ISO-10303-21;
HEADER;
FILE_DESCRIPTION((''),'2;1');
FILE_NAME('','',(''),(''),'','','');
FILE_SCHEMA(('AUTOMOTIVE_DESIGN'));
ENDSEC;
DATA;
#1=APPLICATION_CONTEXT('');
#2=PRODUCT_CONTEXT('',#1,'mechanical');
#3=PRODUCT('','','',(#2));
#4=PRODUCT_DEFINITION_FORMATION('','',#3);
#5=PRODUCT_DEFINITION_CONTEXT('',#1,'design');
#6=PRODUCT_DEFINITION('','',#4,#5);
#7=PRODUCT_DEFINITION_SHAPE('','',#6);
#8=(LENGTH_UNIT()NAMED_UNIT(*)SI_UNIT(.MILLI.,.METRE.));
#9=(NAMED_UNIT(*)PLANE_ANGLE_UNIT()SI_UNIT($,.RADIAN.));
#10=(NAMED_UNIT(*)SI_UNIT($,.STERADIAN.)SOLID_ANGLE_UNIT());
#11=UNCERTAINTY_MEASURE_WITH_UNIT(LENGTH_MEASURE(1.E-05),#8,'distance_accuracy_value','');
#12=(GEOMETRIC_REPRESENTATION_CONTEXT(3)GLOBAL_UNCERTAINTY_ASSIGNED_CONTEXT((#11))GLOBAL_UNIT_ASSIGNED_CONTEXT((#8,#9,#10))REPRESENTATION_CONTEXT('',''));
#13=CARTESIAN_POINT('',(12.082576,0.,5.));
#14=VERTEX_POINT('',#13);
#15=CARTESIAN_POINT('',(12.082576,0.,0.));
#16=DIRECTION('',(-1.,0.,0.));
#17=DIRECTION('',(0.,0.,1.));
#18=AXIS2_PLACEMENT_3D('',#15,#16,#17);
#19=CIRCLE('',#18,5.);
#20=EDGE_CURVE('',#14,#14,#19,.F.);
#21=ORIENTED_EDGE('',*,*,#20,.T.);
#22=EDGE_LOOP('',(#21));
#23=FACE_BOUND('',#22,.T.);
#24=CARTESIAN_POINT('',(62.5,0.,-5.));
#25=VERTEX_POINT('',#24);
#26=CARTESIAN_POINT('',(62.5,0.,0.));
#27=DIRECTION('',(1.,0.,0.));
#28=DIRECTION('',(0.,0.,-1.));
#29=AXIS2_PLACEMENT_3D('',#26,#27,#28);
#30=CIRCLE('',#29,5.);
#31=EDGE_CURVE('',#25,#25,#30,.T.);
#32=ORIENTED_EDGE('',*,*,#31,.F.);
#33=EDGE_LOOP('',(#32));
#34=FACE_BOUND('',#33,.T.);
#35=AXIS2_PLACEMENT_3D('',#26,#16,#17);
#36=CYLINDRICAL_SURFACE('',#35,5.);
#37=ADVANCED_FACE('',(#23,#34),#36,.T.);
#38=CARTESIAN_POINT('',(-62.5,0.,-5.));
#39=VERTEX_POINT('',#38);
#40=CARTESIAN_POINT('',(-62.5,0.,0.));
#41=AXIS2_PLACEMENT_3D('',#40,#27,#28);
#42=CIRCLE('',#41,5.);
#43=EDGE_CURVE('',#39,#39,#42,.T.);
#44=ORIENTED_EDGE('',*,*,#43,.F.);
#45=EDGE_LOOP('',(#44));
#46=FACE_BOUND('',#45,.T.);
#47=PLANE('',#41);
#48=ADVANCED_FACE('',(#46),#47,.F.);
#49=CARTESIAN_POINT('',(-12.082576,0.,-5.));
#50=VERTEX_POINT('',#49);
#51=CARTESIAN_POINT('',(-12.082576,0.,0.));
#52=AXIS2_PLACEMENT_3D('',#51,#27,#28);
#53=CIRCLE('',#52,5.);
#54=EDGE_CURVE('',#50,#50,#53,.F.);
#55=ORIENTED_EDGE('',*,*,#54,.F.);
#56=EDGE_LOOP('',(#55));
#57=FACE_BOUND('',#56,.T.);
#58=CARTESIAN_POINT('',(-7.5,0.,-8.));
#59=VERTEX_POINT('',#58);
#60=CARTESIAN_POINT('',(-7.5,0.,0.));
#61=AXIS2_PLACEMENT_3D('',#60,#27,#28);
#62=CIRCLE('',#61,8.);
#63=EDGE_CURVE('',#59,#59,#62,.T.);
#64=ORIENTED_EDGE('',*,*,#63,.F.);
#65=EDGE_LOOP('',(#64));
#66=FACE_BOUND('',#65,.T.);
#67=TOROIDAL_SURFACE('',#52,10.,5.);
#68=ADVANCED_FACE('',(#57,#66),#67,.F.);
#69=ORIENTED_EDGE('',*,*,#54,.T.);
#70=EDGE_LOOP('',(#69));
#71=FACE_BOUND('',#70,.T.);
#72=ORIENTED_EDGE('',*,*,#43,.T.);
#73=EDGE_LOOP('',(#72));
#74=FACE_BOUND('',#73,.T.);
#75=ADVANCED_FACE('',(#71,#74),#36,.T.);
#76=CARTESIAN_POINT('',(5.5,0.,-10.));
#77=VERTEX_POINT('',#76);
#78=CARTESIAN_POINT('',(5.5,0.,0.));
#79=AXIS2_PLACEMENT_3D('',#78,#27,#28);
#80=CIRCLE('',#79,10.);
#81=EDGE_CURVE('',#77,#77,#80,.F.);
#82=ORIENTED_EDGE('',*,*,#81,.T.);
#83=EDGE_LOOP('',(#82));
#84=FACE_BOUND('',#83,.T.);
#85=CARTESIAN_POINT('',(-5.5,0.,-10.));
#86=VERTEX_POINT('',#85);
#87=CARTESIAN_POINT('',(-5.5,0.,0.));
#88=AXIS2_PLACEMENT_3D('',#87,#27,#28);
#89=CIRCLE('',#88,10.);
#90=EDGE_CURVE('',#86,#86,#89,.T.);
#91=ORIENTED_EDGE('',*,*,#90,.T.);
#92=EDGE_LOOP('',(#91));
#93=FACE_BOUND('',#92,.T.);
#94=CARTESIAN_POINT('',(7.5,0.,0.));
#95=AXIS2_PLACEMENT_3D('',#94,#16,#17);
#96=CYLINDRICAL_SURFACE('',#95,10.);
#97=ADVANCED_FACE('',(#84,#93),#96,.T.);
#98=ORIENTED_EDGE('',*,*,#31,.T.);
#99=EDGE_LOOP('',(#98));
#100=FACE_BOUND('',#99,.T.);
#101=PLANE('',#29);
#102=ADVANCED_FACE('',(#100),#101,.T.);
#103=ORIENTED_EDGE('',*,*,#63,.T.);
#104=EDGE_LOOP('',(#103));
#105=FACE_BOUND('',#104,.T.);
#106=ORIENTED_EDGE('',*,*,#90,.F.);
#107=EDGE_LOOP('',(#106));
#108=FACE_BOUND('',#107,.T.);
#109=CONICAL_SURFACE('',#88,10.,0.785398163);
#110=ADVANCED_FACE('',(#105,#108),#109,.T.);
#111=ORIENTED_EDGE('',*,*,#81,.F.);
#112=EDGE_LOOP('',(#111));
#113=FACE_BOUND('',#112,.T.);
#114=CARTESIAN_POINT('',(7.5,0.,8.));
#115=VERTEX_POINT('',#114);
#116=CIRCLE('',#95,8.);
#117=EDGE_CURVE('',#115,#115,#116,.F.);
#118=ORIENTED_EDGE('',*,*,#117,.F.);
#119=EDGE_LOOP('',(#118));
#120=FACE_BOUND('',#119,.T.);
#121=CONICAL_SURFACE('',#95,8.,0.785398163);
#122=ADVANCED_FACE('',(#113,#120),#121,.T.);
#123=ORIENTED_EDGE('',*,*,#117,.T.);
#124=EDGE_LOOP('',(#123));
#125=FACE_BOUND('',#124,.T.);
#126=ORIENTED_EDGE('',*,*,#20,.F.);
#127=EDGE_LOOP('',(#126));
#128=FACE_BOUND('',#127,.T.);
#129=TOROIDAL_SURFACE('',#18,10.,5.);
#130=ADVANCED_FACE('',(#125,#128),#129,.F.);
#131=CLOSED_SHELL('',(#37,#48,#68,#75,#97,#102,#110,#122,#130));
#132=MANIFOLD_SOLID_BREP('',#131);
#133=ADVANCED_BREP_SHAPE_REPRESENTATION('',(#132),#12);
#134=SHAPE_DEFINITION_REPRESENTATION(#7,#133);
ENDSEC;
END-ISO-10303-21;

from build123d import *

# Parameters (mm, degrees)
SKETCH2_R           = 5
BOSS_EXTRUDE1_DEPTH = 62.5
SKETCH3_R           = 8
BOSS_EXTRUDE2_DEPTH = 7.5
FILLET1_R           = 5
SKETCH4_R           = 10
BOSS_EXTRUDE3_DEPTH = 7.5
CHAMFER1_SIZE       = 2


# Some blends are built 0.0001 mm under size
with BuildPart() as part:
    # Sketch2 → Boss-Extrude1 (new, symmetric)
    with BuildSketch(Plane(origin=(0, 0, 0), x_dir=(0, 0, -1), z_dir=(1, 0, 0))):
        Circle(SKETCH2_R)
    extrude(amount=BOSS_EXTRUDE1_DEPTH, both=True)

    # Sketch3 → Boss-Extrude2 (add, symmetric)
    with BuildSketch(Plane(origin=(0, 0, 0), x_dir=(0, 0, -1), z_dir=(1, 0, 0))):
        Circle(SKETCH3_R)
    extrude(amount=BOSS_EXTRUDE2_DEPTH, both=True)

    # Fillet1
    # the kernel refuses this fillet: 5 mm, written as the material it adds along each edge
    with BuildSketch(Plane(origin=(-7.5, 0, 0), x_dir=(0, 0, -1), z_dir=(0, -1, 0))) as fillet1_piece_1:
        with BuildLine():
            CenterArc((10, -4.582575695), FILLET1_R, 113.578178478, 66.421821522)
            Line((8, 0), (7.96, 0.091651514))
            ThreePointArc((7.96, 0.091651514), (6.5, 0.1), (5, 0.1))
            Line((5, 0.1), (4.9, 0))
            Line((4.9, 0), (4.9, -4.582575695))
            Line((4.9, -4.582575695), (5, -4.582575695))
        make_face()
    revolve(axis=Axis((-7.5, 0, 0), (1, 0, 0)))
    with BuildSketch(Plane(origin=(7.5, 0, 0), x_dir=(0, 0, -1), z_dir=(0, -1, 0))) as fillet1_piece_2:
        with BuildLine():
            CenterArc((10, 4.582575695), FILLET1_R, 180, 66.421821522)
            Line((5, 4.582575695), (4.9, 4.582575695))
            Line((4.9, 4.582575695), (4.9, 0))
            Line((4.9, 0), (5, -0.1))
            ThreePointArc((5, -0.1), (6.5, -0.1), (7.96, -0.091651514))
            Line((7.96, -0.091651514), (8, 0))
        make_face()
    revolve(axis=Axis((7.5, 0, 0), (1, 0, 0)))

    # Sketch4 → Boss-Extrude3 (add, symmetric)
    with BuildSketch(Plane(origin=(0, 0, 0), x_dir=(0, 0, -1), z_dir=(1, 0, 0))):
        Circle(SKETCH4_R)
    extrude(amount=BOSS_EXTRUDE3_DEPTH, both=True)

    # Chamfer1
    chamfer1_edges = [part.edges().sort_by_distance(p)[0] for p in [
        (-7.5, 0, 10),
        (7.5, 0, 10),
    ]]
    chamfer(chamfer1_edges, length=CHAMFER1_SIZE - 0.0001)  # a hair under: the kernel refuses the full size


solid = part.part
